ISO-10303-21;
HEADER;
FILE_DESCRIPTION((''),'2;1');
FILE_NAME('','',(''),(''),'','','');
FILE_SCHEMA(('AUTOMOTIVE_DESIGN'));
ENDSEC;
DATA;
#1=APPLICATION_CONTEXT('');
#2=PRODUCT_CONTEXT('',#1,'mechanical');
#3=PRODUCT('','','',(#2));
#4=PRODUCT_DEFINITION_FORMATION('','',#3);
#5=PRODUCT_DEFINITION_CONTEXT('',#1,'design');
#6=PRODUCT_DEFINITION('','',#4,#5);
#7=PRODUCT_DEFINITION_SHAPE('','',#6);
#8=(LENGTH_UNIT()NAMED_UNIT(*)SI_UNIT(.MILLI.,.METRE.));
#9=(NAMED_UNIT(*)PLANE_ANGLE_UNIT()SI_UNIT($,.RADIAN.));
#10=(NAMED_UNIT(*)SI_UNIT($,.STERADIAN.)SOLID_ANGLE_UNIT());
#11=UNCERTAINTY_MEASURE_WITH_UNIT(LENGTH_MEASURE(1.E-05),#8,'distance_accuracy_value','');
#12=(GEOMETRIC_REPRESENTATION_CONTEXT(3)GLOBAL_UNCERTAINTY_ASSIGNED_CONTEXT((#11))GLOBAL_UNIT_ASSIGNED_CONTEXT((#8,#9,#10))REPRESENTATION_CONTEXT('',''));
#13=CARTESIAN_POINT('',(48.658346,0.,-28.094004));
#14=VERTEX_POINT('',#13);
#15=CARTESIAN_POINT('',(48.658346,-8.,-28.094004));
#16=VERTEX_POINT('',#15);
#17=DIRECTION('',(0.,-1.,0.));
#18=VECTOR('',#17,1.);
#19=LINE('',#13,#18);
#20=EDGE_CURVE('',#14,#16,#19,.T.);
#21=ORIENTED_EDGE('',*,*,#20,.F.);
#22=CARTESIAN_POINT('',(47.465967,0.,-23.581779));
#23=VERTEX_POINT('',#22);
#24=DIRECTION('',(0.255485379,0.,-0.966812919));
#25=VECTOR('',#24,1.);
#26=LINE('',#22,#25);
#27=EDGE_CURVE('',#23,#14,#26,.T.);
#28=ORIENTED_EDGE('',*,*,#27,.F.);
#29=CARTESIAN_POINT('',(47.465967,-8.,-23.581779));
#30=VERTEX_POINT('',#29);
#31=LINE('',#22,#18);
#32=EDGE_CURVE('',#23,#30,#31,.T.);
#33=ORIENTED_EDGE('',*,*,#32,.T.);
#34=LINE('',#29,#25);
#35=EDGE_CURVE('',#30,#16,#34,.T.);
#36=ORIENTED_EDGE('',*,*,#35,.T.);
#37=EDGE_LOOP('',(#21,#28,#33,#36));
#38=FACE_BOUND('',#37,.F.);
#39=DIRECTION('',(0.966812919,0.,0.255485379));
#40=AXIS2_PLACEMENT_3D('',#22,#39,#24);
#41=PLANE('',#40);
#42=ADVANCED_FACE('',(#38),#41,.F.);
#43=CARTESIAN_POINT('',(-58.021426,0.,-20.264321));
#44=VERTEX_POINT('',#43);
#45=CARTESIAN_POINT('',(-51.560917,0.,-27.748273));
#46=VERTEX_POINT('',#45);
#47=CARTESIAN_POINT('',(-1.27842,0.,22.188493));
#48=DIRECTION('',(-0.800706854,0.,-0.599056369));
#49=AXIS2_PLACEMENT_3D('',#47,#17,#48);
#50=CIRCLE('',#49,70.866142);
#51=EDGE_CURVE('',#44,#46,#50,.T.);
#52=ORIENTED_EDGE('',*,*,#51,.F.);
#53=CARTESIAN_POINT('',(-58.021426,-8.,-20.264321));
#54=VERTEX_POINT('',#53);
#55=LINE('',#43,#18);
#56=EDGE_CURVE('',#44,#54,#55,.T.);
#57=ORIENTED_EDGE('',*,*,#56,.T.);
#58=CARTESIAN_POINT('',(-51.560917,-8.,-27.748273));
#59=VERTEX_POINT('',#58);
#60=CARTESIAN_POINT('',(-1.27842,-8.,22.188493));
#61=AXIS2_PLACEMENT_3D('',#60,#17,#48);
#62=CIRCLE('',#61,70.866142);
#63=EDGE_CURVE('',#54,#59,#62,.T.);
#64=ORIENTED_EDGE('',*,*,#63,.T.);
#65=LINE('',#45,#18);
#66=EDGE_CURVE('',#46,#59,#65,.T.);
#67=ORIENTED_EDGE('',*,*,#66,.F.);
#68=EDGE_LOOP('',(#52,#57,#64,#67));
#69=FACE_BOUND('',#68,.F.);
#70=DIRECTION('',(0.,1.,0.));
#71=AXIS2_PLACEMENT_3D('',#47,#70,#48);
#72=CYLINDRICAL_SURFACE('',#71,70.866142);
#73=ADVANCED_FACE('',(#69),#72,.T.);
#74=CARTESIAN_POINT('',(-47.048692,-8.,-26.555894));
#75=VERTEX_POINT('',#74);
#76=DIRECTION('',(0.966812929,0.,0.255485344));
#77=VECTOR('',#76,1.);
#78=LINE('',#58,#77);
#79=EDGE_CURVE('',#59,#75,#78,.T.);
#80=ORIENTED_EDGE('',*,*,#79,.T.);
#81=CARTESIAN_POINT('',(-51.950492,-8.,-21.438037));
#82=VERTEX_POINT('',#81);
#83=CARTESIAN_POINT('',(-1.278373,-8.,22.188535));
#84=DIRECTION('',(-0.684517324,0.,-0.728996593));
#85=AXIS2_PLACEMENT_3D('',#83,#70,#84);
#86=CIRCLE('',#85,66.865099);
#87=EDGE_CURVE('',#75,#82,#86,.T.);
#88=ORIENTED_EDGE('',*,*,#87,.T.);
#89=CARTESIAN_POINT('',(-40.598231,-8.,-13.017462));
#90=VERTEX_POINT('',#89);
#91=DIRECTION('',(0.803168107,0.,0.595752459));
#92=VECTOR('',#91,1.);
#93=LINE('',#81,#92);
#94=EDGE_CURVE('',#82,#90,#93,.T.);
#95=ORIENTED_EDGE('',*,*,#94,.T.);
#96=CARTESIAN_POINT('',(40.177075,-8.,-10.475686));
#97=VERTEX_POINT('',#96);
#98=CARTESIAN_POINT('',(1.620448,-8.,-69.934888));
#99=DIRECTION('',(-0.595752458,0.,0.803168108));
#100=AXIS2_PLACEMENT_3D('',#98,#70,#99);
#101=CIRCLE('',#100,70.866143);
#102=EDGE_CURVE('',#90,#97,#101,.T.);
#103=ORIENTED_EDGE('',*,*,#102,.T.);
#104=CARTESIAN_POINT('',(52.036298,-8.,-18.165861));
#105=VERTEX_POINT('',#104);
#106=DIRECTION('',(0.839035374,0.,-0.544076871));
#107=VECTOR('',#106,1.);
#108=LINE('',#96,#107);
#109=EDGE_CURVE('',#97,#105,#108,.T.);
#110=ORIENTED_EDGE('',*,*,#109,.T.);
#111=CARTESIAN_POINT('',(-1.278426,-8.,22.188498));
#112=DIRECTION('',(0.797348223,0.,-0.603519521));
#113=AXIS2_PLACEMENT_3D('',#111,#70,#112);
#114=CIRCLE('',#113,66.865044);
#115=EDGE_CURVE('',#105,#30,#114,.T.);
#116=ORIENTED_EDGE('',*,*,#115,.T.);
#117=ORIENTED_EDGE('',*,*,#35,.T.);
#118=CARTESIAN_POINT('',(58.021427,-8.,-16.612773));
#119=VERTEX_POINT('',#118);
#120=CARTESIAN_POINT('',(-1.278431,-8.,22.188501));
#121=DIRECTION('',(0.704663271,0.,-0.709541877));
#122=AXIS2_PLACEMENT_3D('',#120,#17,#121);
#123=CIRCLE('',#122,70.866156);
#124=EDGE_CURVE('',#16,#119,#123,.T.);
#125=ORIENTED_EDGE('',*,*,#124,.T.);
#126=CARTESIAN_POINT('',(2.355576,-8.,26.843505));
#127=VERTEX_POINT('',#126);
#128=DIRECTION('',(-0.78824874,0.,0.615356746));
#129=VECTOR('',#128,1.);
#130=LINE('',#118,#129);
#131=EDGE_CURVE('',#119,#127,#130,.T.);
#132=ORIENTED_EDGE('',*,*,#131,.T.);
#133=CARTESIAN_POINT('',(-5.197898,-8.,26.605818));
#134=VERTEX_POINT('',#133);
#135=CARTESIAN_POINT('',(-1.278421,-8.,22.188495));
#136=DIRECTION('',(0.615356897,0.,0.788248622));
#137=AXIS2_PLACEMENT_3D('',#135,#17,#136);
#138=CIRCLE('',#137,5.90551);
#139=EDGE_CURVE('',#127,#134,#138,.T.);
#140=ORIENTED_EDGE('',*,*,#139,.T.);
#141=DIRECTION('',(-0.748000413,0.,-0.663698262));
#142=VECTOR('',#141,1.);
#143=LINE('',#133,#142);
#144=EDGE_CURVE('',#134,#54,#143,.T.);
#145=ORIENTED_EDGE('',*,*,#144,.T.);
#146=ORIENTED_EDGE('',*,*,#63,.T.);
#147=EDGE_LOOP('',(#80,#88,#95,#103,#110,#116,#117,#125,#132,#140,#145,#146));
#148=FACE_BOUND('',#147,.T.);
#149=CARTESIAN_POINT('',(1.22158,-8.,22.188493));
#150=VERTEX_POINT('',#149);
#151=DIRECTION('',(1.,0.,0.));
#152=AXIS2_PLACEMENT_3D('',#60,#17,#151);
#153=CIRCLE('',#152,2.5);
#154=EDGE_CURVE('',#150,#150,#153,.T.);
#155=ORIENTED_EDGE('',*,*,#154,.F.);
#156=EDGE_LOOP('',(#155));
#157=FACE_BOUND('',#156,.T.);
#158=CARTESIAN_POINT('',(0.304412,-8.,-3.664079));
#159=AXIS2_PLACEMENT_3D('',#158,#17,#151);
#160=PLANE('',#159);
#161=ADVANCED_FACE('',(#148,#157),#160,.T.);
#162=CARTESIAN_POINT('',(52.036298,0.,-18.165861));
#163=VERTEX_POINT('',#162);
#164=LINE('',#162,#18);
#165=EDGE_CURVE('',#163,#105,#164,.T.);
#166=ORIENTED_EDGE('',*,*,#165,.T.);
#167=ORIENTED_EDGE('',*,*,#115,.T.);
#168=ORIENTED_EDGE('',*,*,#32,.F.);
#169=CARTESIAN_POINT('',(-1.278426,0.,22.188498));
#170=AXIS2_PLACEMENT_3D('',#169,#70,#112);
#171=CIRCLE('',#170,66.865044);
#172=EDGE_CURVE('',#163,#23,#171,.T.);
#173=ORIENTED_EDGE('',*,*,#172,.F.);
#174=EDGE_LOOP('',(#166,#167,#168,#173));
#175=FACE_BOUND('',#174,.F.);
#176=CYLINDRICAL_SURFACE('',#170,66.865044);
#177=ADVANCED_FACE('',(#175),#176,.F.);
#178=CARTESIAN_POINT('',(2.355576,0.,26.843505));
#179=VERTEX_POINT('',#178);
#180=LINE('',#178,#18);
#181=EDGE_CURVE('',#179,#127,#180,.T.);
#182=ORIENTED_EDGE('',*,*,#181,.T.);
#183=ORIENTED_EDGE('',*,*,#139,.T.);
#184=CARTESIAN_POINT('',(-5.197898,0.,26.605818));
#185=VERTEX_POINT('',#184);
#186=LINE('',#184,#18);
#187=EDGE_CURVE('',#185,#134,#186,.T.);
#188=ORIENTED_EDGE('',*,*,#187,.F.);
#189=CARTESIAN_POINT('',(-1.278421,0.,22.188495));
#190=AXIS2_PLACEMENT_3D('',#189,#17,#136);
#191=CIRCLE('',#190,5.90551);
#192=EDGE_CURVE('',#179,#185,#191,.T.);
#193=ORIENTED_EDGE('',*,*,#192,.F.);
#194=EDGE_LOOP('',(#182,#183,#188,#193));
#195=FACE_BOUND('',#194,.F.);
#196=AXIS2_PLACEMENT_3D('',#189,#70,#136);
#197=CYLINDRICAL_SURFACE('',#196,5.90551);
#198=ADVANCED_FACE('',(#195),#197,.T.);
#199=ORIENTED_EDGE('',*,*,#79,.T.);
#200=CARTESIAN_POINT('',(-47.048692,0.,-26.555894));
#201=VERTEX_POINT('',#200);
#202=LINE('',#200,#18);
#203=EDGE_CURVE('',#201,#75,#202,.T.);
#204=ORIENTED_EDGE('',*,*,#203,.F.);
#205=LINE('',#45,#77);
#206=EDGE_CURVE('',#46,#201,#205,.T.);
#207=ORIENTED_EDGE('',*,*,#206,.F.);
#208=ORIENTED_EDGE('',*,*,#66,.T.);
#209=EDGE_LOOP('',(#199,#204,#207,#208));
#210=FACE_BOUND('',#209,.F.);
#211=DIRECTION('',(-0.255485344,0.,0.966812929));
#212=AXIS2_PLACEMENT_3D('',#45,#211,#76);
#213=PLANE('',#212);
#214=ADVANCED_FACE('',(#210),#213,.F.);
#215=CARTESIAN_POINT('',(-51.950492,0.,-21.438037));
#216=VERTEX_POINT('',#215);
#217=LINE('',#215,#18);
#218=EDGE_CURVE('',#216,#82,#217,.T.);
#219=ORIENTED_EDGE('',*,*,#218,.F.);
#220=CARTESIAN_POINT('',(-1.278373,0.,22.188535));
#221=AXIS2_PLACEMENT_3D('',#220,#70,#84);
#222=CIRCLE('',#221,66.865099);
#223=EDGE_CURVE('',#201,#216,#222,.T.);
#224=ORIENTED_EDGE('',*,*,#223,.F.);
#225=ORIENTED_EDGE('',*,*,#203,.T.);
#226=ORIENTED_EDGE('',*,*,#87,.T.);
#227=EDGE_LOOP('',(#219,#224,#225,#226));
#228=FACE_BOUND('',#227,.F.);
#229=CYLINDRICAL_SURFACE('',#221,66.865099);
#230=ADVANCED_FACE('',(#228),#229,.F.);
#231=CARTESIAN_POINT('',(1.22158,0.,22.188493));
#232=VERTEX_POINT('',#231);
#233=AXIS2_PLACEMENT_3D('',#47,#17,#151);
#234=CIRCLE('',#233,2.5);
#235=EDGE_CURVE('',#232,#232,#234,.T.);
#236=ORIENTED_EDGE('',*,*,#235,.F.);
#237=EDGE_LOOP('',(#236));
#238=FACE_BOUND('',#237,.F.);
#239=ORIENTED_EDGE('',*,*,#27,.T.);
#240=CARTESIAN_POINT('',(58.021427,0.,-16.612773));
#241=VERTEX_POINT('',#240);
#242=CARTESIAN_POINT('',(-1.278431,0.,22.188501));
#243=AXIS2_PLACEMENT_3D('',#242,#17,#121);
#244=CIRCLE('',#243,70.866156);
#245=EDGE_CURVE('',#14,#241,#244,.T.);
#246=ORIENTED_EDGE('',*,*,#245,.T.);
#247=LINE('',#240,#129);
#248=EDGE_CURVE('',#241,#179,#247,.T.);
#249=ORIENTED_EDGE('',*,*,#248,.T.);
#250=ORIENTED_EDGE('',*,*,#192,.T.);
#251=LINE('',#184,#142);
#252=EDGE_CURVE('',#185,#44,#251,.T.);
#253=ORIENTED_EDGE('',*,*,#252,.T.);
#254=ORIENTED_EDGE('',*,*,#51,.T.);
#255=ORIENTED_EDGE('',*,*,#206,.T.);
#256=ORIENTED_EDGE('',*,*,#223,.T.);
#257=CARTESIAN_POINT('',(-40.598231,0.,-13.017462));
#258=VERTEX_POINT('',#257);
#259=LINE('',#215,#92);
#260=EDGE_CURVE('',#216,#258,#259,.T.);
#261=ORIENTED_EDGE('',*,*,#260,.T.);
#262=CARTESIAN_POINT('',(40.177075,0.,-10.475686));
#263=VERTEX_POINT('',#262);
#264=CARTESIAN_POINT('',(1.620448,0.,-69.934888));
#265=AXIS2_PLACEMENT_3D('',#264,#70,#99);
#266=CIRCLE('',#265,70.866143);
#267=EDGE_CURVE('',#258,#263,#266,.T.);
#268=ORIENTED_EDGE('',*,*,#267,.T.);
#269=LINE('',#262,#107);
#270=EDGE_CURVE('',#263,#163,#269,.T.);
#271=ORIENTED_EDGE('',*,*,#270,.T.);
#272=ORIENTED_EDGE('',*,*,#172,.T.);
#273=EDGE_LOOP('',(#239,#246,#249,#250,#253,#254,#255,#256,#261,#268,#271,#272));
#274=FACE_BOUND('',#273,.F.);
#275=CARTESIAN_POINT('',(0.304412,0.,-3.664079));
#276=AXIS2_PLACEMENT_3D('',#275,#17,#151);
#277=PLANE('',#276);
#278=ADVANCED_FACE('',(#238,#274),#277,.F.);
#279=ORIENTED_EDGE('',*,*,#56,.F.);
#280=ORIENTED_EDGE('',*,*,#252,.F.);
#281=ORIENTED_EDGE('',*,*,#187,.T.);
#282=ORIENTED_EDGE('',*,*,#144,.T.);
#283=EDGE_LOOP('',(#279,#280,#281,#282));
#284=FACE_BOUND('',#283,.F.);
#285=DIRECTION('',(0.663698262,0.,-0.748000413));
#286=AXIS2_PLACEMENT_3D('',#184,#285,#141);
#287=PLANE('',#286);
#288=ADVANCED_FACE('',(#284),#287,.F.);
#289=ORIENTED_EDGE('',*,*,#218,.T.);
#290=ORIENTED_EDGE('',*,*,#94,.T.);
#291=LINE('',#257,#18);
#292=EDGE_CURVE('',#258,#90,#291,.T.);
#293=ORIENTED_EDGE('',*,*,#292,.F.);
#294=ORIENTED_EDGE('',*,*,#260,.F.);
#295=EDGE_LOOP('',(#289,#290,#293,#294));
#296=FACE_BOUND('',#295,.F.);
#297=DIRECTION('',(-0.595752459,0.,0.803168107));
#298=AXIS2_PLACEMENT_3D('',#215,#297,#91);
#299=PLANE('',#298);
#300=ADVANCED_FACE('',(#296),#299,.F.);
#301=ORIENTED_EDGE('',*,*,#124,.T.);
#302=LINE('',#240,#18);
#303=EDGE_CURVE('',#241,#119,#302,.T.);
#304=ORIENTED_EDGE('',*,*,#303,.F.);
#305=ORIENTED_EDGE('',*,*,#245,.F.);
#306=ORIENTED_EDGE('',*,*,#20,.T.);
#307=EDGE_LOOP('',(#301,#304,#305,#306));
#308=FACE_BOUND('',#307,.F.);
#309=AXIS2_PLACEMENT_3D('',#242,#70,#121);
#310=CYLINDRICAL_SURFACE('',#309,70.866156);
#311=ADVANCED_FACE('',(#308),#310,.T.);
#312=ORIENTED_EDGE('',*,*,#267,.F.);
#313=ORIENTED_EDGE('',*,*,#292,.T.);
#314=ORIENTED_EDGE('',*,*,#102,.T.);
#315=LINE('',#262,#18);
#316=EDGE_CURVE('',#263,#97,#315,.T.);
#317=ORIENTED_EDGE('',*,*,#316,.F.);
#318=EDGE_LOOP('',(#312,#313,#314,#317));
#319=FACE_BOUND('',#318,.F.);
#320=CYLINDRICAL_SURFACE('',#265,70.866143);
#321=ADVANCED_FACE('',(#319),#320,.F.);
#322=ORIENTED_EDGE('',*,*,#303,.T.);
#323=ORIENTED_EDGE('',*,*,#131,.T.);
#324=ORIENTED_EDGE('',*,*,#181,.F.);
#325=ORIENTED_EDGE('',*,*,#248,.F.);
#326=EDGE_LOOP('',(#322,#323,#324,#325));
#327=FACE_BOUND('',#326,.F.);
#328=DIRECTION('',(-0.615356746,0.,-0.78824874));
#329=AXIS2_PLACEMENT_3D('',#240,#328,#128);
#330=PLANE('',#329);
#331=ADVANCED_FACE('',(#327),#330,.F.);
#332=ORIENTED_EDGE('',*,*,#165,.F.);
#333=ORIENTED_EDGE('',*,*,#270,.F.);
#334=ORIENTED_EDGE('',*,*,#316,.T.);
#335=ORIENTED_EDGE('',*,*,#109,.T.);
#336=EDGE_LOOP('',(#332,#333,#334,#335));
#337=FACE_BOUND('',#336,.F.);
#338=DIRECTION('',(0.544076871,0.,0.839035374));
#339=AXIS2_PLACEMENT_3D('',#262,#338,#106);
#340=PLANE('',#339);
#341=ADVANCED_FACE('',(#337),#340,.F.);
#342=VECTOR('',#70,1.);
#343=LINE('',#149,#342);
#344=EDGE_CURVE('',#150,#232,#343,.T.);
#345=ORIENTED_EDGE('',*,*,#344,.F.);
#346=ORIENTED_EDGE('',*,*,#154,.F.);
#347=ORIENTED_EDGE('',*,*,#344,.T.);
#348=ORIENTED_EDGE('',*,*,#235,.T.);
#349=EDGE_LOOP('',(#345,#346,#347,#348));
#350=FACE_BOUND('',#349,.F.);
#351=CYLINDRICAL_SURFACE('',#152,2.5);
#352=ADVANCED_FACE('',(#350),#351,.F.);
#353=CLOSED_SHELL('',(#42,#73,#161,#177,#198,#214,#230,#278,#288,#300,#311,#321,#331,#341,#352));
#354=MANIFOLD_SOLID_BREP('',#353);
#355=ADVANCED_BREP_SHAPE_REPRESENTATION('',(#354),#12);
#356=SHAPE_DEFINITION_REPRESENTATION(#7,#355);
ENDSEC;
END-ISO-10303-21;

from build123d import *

# Parameters (mm, degrees)
F1_DEPTH = 8
F2_R     = 2.5
F3_DEPTH = 8


# Not quite as in the source:
# - ends of sketch curves that miss each other by under 0.0002 mm in the source are joined


with BuildPart() as f1:
    # F0 (on Front) → F1 (new body)
    with BuildSketch(Plane.XZ):
        with BuildLine():
            ThreePointArc((-58.0214256358, -20.2643207275), (-54.9218439489, -24.1190997792), (-51.5609168942, -27.7482728949))
            Line((-51.5609168942, -27.7482728949), (-47.048692, -26.555894))
            ThreePointArc((-47.048692, -26.555894), (-49.5674409521, -24.0619501846), (-51.9504921504, -21.4380372685))
            Line((-51.9504921504, -21.4380372685), (-40.598231, -13.017462))
            ThreePointArc((-40.598231, -13.017462), (-0.6084110144, 0.8961956506), (40.1770750491, -10.4756859243))
            Line((40.1770750491, -10.4756859243), (52.036298, -18.165861))
            ThreePointArc((52.036298, -18.165861), (49.8229328445, -20.9344101577), (47.4659668709, -23.5817788788))
            Line((47.4659668709, -23.5817788788), (48.658346, -28.094004))
            ThreePointArc((48.658346, -28.094004), (53.6407391456, -22.5987377774), (58.0214266089, -16.6127733984))
            Line((58.0214266089, -16.6127733984), (2.355576, 26.843505))
            ThreePointArc((2.355576, 26.843505), (-1.4641584631, 28.091083381), (-5.1978982267, 26.6058182555))
            Line((-5.1978982267, 26.6058182555), (-58.0214256358, -20.2643207275))
        make_face()
    extrude(amount=F1_DEPTH)

    # F2 (on face) → F3 (cut, through all)
    with BuildSketch(Plane.XZ.offset(8)):
        with Locations((-1.27842, 22.188493)):
            Circle(F2_R)
    extrude(amount=-F3_DEPTH, mode=Mode.SUBTRACT)


solid = f1.part
